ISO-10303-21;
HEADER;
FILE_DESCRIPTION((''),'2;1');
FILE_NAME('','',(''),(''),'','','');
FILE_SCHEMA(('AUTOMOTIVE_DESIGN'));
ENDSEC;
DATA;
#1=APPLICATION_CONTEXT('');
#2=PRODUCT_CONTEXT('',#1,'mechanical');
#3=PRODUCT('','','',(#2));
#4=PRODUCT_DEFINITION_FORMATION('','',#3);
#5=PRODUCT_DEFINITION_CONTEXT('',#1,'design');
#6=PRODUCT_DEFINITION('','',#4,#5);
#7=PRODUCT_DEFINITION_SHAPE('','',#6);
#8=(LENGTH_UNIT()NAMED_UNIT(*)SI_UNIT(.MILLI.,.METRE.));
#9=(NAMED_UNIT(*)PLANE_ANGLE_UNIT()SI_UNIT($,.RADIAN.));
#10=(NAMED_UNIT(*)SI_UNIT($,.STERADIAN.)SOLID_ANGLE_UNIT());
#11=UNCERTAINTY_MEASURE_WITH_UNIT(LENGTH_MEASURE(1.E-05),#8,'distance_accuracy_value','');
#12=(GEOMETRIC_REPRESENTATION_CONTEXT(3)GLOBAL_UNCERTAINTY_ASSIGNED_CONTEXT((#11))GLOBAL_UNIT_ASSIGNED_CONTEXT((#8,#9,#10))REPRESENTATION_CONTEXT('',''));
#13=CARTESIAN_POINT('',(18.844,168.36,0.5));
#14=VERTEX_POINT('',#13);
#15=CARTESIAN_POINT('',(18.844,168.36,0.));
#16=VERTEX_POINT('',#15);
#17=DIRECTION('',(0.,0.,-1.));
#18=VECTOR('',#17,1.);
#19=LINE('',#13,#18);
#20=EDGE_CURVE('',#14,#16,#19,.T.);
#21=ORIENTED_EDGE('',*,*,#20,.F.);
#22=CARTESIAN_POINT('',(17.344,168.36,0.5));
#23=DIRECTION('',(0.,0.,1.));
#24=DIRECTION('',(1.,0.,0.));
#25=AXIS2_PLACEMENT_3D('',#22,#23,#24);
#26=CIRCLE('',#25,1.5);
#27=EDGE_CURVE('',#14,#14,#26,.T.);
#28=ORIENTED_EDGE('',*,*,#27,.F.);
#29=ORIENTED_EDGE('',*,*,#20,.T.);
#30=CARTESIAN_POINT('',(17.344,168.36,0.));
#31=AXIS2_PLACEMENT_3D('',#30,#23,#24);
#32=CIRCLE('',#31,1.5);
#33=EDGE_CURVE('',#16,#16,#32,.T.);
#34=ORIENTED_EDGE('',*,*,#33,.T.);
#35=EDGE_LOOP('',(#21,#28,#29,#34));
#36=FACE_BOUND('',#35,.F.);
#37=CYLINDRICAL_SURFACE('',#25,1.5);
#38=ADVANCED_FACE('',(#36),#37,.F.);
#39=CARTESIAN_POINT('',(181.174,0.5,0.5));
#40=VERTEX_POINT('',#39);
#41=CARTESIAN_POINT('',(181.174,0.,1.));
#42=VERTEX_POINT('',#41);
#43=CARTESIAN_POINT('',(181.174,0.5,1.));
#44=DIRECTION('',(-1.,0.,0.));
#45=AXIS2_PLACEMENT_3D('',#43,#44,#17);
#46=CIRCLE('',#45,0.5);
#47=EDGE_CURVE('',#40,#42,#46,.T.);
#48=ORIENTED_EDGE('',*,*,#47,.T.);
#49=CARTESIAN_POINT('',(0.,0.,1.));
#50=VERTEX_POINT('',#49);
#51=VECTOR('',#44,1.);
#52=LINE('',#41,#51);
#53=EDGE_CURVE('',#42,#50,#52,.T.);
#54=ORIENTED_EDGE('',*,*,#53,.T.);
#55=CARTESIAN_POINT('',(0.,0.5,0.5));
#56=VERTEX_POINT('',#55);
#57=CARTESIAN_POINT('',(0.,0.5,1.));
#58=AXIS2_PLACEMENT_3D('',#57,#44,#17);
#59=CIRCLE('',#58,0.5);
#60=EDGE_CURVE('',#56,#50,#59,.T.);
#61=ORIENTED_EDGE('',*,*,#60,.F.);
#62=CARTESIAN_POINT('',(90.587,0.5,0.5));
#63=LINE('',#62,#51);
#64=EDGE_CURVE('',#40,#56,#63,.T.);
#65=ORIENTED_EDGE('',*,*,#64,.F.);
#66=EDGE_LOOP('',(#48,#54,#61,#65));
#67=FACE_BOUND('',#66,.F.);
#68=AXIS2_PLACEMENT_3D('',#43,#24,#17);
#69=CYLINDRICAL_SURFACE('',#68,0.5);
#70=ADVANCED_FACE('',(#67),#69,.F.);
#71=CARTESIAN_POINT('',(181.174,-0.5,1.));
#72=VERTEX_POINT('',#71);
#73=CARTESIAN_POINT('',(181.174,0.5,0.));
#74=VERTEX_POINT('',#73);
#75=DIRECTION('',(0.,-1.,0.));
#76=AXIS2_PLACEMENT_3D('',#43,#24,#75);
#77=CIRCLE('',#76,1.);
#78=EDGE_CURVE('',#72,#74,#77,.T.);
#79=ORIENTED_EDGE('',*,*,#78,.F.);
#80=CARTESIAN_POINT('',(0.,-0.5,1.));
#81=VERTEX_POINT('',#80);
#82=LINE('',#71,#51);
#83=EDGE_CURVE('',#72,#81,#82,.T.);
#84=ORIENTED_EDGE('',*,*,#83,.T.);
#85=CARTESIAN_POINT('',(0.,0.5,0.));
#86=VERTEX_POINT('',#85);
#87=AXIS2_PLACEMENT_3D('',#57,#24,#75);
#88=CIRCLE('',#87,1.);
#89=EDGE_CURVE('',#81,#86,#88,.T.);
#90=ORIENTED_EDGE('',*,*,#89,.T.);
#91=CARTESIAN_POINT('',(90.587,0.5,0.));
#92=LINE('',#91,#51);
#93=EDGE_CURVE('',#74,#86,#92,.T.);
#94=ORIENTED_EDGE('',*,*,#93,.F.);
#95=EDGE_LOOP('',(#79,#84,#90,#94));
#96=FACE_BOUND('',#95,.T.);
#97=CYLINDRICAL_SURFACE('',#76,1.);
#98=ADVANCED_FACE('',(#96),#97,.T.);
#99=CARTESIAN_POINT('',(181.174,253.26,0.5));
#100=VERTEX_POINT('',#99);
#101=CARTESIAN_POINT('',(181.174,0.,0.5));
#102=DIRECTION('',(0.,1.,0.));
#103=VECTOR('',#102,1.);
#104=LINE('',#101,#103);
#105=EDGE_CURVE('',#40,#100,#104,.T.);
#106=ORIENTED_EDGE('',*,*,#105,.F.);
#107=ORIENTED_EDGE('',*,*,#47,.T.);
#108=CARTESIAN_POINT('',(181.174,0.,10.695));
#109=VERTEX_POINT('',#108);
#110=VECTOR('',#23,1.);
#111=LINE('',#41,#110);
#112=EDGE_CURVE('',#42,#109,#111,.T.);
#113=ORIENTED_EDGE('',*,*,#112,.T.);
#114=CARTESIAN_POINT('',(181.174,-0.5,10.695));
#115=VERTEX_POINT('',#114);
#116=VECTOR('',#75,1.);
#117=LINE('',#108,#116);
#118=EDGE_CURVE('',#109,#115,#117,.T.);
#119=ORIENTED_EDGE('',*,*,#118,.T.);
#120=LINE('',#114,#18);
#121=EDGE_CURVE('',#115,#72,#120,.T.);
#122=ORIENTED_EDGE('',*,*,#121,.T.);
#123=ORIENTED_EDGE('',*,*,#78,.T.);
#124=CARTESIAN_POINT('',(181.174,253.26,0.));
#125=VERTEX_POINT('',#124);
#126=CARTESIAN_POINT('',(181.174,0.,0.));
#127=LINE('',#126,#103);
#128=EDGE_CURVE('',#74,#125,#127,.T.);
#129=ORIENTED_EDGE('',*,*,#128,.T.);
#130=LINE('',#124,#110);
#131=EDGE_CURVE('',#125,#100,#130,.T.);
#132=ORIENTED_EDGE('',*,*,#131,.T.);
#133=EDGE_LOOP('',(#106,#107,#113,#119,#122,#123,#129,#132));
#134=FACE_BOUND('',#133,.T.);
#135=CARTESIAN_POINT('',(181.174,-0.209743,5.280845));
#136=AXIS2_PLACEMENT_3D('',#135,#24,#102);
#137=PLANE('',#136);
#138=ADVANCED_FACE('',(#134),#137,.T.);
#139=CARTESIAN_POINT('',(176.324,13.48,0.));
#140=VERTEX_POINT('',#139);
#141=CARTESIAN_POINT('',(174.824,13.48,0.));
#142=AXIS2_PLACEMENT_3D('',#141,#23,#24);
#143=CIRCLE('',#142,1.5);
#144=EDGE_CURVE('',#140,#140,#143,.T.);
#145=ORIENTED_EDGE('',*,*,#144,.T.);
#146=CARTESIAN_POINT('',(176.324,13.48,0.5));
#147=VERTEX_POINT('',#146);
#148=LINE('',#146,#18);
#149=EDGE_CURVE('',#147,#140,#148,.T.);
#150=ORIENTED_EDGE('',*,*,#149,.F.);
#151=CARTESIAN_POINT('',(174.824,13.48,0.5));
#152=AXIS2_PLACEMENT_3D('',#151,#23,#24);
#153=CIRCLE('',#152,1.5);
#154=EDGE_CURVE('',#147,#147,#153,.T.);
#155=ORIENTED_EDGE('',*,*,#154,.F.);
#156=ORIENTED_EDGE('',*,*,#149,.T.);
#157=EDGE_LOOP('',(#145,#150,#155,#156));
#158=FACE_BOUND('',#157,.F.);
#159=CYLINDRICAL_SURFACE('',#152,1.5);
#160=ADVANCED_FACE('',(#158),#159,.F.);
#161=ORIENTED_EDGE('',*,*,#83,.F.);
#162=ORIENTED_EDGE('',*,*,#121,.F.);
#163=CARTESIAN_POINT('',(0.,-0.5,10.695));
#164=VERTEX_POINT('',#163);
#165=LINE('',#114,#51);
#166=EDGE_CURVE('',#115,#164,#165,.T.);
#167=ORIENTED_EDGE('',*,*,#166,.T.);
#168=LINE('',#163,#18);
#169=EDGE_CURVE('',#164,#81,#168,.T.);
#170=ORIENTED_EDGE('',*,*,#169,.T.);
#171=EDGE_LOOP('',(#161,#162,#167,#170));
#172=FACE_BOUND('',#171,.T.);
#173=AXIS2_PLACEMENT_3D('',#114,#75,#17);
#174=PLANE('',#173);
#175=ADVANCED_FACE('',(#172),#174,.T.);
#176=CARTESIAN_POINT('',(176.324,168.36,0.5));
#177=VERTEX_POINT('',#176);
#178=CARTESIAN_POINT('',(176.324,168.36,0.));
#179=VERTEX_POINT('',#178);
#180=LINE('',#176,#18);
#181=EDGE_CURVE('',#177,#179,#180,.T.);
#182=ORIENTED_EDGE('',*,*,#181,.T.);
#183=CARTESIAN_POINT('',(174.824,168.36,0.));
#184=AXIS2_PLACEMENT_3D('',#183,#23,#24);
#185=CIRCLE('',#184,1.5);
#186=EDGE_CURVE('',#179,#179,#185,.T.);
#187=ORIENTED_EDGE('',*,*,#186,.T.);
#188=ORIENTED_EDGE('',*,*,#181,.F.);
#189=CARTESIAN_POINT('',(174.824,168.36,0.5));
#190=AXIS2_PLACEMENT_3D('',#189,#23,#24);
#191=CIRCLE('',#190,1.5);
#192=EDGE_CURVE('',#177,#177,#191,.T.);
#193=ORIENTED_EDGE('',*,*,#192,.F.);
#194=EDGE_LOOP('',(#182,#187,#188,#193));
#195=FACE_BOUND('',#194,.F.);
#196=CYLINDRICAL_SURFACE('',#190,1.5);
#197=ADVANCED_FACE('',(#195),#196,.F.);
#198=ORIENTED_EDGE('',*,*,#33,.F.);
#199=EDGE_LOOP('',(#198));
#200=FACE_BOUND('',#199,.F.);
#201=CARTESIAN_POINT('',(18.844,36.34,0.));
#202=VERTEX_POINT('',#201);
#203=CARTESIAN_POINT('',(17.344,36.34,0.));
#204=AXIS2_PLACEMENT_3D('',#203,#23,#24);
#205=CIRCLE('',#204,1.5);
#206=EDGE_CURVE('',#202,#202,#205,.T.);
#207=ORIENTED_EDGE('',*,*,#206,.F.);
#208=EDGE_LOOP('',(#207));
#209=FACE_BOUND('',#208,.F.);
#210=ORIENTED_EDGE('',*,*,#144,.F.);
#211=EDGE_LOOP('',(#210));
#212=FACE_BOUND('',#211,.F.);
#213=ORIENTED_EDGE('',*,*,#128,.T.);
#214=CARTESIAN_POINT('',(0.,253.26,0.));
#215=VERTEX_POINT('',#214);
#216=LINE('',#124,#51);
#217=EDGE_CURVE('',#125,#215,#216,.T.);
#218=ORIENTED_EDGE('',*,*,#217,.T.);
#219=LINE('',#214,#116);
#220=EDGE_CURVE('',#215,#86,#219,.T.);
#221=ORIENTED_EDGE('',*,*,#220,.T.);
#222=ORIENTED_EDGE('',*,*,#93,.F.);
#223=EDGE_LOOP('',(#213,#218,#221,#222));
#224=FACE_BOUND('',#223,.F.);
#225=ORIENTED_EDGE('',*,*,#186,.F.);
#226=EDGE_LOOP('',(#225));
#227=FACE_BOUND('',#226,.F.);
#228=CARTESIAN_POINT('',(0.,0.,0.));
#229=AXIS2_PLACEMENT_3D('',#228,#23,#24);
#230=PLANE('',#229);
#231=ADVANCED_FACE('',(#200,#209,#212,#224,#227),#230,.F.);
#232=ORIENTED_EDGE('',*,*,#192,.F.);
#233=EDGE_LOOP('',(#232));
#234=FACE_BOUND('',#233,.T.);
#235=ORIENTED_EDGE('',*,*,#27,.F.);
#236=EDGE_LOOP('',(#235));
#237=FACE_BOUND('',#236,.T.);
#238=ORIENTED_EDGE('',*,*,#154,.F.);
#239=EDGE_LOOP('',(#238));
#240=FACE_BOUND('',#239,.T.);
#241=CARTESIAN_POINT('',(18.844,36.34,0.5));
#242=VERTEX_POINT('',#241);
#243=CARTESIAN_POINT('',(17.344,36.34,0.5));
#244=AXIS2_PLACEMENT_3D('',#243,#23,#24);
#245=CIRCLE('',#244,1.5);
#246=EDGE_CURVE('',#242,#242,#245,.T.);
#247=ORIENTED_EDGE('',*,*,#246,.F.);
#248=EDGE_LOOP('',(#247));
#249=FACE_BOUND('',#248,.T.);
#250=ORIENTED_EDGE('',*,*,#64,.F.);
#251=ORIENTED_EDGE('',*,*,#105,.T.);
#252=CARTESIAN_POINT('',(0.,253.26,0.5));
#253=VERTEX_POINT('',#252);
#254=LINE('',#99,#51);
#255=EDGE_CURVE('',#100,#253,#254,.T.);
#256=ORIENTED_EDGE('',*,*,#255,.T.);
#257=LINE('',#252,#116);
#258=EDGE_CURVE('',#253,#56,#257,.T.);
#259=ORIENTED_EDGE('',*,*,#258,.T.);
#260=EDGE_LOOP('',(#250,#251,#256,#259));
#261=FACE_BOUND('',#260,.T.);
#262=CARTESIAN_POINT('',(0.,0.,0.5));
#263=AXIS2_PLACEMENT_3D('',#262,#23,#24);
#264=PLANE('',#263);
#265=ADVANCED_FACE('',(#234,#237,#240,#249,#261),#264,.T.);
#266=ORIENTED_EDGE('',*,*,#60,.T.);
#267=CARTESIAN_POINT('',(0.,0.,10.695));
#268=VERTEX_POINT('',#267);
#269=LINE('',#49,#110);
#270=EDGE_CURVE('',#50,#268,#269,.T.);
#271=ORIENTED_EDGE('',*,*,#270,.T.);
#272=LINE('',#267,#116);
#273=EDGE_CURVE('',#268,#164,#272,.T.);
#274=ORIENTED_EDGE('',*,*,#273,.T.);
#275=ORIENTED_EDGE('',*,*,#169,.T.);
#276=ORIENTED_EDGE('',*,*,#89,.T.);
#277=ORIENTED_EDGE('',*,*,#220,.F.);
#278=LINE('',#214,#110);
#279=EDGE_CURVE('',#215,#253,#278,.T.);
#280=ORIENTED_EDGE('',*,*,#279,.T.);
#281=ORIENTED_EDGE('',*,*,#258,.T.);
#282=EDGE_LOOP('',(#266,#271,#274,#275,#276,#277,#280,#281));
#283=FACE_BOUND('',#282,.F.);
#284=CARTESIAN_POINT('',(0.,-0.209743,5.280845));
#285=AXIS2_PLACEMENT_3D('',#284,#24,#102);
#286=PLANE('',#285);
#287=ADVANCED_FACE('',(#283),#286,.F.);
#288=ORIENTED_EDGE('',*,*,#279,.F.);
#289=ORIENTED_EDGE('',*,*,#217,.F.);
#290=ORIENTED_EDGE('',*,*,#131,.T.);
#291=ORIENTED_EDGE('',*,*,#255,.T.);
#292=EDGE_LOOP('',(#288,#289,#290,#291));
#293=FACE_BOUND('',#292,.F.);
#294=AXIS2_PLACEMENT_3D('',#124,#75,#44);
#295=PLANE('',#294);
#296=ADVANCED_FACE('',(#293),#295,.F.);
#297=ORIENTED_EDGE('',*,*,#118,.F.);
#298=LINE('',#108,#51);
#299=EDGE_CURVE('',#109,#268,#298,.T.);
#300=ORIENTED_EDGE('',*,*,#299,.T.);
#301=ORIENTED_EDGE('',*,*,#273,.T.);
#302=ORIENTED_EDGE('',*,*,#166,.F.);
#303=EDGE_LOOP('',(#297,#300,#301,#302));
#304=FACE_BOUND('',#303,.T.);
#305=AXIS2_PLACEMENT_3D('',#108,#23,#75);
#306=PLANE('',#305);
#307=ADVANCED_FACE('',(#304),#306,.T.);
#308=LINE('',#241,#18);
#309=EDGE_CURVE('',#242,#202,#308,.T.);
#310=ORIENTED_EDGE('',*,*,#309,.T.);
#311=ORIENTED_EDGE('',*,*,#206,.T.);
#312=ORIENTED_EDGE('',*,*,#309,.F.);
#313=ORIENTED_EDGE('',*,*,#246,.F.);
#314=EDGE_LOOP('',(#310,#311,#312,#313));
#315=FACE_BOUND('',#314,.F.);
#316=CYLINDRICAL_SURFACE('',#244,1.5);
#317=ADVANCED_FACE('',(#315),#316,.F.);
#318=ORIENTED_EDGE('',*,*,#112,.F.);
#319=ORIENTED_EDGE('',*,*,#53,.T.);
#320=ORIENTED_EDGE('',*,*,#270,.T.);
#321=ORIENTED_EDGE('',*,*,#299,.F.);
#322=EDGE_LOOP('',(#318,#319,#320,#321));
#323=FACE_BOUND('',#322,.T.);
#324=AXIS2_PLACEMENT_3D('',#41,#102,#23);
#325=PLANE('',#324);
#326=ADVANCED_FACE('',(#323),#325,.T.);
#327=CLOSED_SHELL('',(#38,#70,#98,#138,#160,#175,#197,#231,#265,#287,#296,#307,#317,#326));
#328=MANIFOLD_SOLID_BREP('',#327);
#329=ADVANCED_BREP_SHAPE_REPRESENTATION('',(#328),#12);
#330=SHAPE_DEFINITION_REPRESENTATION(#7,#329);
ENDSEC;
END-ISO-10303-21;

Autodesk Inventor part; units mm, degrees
ref_plane "YZ Plane" through (0, 0, 0) normal (1, 0, 0) x (0, 1, 0)
ref_plane "XZ Plane" through (0, 0, 0) normal (0, 1, 0) x (-1, 0, 0)
ref_plane "XY Plane" through (0, 0, 0) normal (0, 0, 1) x (1, 0, 0)
sketch "Sketch1" plane through (0, 0, 0) normal (0, 0, 1) x (1, 0, 0)
  line L0 (0, 0) -> (181.174, 0)
  line L1 (181.174, 0) -> (181.174, 253.26)
  line L2 (181.174, 253.26) -> (0, 253.26)
  line L3 (0, 253.26) -> (0, 0)
  dimension "d0" = 181.174
  dimension "d1" = 253.26
extrude "Plate1" add sketch "Sketch1" along normal blind 0.5
sketch "Sketch2" plane through (181.174, 0, 0.5) normal (0, -1, 0) x (1, 0, 0)
  line L0 (-181.174, 0) -> (0, 0)
  line L1 (0, 0) -> (0, 10.195)
  line L2 (0, 10.195) -> (-181.174, 10.195)
  line L3 (-181.174, 10.195) -> (-181.174, 0)
edge flange "Flange1" height 10.695 angle 90 thickness 0.5 bend radius 0.5 thickness toward (0, -1, 0) relief tear relief width 0.5 relief depth 0.25 edges at (90.587, 0, 0.5) wall of the first edge with corners at (0, 0, 0.5) (181.174, 0, 0.5) (181.174, 0, 10.695) (0, 0, 10.695)
bend "Bend1"
corner "Corner1"
sketch "Sketch3" plane through (0, 0, 0.5) normal (0, 0, 1) x (1, 0, 0)
  line L0 (181.174, 253.26) -> (181.174, 0.5) projected
  line L1 (181.174, 253.26) -> (181.174, 168.36) construction
  line L2 (181.174, 168.36) -> (174.824, 168.36) construction
  line L3 (174.824, 168.36) -> (17.344, 168.36) construction
  line L4 (174.824, 168.36) -> (174.824, 13.48) construction
  circle A0 centre (174.824, 13.48) radius 1.5
  circle A1 centre (174.824, 168.36) radius 1.5
  circle A2 centre (17.344, 168.36) radius 1.5
  point P0 (0, 0)
  dimension "d13" = 84.9
  dimension "d14" = 6.35
  dimension "d15" = 157.48
  dimension "d16" = 154.88
  dimension "d17" = 3
  dimension "d18" = 3
  dimension "d19" = 3
extrude "Extrusion1" cut sketch "Sketch3" against normal blind 10
sketch "Sketch5" plane through (0, 0, 0.5) normal (0, 0, 1) x (1, 0, 0)
  circle A0 centre (17.344, 168.36) radius 1.5 projected
  line L0 (17.344, 168.36) -> (17.344, 35.808) construction
  line L1 (17.344, 168.36) -> (149.896, 168.36) construction
  line L2 (17.344, 35.808) -> (17.344, 36.34) construction
  circle A1 centre (17.344, 36.34) radius 1.5
  point P0 (0, 0)
  dimension "d28" = 90
  dimension "d32" = 0.532
  dimension "d33" = 3
extrude "Extrusion4" cut sketch "Sketch5" against normal blind 10 contours A1
equation "\"d2\" = Thickness"
equation "\"d3\" = BendReliefWidth"
equation "\"d4\" = BendReliefDepth"
equation "\"d5\" = MinimumRemnant"
equation "\"d6\" = TransitionRadius"
equation "\"d9\" = BendRadius"
equation "\"d10\" = CornerReliefSize"
equation "\"d11\" = GapSize"
equation "\"d12\" = JacobiRadiusSize"
equation "\"BendRadius\" = Thickness"
equation "\"BendReliefWidth\" = Thickness"
equation "\"BendReliefDepth\" = 0.5 * Thickness"
equation "\"CornerReliefSize\" = 4 * Thickness"
equation "\"MinimumRemnant\" = 2 * Thickness"
equation "\"TransitionRadius\" = BendRadius"
equation "\"JacobiRadiusSize\" = BendRadius"
equation "\"GapSize\" = Thickness"
equation "\"Thickness\" = 0.5"
properties part number "dads trunk"
